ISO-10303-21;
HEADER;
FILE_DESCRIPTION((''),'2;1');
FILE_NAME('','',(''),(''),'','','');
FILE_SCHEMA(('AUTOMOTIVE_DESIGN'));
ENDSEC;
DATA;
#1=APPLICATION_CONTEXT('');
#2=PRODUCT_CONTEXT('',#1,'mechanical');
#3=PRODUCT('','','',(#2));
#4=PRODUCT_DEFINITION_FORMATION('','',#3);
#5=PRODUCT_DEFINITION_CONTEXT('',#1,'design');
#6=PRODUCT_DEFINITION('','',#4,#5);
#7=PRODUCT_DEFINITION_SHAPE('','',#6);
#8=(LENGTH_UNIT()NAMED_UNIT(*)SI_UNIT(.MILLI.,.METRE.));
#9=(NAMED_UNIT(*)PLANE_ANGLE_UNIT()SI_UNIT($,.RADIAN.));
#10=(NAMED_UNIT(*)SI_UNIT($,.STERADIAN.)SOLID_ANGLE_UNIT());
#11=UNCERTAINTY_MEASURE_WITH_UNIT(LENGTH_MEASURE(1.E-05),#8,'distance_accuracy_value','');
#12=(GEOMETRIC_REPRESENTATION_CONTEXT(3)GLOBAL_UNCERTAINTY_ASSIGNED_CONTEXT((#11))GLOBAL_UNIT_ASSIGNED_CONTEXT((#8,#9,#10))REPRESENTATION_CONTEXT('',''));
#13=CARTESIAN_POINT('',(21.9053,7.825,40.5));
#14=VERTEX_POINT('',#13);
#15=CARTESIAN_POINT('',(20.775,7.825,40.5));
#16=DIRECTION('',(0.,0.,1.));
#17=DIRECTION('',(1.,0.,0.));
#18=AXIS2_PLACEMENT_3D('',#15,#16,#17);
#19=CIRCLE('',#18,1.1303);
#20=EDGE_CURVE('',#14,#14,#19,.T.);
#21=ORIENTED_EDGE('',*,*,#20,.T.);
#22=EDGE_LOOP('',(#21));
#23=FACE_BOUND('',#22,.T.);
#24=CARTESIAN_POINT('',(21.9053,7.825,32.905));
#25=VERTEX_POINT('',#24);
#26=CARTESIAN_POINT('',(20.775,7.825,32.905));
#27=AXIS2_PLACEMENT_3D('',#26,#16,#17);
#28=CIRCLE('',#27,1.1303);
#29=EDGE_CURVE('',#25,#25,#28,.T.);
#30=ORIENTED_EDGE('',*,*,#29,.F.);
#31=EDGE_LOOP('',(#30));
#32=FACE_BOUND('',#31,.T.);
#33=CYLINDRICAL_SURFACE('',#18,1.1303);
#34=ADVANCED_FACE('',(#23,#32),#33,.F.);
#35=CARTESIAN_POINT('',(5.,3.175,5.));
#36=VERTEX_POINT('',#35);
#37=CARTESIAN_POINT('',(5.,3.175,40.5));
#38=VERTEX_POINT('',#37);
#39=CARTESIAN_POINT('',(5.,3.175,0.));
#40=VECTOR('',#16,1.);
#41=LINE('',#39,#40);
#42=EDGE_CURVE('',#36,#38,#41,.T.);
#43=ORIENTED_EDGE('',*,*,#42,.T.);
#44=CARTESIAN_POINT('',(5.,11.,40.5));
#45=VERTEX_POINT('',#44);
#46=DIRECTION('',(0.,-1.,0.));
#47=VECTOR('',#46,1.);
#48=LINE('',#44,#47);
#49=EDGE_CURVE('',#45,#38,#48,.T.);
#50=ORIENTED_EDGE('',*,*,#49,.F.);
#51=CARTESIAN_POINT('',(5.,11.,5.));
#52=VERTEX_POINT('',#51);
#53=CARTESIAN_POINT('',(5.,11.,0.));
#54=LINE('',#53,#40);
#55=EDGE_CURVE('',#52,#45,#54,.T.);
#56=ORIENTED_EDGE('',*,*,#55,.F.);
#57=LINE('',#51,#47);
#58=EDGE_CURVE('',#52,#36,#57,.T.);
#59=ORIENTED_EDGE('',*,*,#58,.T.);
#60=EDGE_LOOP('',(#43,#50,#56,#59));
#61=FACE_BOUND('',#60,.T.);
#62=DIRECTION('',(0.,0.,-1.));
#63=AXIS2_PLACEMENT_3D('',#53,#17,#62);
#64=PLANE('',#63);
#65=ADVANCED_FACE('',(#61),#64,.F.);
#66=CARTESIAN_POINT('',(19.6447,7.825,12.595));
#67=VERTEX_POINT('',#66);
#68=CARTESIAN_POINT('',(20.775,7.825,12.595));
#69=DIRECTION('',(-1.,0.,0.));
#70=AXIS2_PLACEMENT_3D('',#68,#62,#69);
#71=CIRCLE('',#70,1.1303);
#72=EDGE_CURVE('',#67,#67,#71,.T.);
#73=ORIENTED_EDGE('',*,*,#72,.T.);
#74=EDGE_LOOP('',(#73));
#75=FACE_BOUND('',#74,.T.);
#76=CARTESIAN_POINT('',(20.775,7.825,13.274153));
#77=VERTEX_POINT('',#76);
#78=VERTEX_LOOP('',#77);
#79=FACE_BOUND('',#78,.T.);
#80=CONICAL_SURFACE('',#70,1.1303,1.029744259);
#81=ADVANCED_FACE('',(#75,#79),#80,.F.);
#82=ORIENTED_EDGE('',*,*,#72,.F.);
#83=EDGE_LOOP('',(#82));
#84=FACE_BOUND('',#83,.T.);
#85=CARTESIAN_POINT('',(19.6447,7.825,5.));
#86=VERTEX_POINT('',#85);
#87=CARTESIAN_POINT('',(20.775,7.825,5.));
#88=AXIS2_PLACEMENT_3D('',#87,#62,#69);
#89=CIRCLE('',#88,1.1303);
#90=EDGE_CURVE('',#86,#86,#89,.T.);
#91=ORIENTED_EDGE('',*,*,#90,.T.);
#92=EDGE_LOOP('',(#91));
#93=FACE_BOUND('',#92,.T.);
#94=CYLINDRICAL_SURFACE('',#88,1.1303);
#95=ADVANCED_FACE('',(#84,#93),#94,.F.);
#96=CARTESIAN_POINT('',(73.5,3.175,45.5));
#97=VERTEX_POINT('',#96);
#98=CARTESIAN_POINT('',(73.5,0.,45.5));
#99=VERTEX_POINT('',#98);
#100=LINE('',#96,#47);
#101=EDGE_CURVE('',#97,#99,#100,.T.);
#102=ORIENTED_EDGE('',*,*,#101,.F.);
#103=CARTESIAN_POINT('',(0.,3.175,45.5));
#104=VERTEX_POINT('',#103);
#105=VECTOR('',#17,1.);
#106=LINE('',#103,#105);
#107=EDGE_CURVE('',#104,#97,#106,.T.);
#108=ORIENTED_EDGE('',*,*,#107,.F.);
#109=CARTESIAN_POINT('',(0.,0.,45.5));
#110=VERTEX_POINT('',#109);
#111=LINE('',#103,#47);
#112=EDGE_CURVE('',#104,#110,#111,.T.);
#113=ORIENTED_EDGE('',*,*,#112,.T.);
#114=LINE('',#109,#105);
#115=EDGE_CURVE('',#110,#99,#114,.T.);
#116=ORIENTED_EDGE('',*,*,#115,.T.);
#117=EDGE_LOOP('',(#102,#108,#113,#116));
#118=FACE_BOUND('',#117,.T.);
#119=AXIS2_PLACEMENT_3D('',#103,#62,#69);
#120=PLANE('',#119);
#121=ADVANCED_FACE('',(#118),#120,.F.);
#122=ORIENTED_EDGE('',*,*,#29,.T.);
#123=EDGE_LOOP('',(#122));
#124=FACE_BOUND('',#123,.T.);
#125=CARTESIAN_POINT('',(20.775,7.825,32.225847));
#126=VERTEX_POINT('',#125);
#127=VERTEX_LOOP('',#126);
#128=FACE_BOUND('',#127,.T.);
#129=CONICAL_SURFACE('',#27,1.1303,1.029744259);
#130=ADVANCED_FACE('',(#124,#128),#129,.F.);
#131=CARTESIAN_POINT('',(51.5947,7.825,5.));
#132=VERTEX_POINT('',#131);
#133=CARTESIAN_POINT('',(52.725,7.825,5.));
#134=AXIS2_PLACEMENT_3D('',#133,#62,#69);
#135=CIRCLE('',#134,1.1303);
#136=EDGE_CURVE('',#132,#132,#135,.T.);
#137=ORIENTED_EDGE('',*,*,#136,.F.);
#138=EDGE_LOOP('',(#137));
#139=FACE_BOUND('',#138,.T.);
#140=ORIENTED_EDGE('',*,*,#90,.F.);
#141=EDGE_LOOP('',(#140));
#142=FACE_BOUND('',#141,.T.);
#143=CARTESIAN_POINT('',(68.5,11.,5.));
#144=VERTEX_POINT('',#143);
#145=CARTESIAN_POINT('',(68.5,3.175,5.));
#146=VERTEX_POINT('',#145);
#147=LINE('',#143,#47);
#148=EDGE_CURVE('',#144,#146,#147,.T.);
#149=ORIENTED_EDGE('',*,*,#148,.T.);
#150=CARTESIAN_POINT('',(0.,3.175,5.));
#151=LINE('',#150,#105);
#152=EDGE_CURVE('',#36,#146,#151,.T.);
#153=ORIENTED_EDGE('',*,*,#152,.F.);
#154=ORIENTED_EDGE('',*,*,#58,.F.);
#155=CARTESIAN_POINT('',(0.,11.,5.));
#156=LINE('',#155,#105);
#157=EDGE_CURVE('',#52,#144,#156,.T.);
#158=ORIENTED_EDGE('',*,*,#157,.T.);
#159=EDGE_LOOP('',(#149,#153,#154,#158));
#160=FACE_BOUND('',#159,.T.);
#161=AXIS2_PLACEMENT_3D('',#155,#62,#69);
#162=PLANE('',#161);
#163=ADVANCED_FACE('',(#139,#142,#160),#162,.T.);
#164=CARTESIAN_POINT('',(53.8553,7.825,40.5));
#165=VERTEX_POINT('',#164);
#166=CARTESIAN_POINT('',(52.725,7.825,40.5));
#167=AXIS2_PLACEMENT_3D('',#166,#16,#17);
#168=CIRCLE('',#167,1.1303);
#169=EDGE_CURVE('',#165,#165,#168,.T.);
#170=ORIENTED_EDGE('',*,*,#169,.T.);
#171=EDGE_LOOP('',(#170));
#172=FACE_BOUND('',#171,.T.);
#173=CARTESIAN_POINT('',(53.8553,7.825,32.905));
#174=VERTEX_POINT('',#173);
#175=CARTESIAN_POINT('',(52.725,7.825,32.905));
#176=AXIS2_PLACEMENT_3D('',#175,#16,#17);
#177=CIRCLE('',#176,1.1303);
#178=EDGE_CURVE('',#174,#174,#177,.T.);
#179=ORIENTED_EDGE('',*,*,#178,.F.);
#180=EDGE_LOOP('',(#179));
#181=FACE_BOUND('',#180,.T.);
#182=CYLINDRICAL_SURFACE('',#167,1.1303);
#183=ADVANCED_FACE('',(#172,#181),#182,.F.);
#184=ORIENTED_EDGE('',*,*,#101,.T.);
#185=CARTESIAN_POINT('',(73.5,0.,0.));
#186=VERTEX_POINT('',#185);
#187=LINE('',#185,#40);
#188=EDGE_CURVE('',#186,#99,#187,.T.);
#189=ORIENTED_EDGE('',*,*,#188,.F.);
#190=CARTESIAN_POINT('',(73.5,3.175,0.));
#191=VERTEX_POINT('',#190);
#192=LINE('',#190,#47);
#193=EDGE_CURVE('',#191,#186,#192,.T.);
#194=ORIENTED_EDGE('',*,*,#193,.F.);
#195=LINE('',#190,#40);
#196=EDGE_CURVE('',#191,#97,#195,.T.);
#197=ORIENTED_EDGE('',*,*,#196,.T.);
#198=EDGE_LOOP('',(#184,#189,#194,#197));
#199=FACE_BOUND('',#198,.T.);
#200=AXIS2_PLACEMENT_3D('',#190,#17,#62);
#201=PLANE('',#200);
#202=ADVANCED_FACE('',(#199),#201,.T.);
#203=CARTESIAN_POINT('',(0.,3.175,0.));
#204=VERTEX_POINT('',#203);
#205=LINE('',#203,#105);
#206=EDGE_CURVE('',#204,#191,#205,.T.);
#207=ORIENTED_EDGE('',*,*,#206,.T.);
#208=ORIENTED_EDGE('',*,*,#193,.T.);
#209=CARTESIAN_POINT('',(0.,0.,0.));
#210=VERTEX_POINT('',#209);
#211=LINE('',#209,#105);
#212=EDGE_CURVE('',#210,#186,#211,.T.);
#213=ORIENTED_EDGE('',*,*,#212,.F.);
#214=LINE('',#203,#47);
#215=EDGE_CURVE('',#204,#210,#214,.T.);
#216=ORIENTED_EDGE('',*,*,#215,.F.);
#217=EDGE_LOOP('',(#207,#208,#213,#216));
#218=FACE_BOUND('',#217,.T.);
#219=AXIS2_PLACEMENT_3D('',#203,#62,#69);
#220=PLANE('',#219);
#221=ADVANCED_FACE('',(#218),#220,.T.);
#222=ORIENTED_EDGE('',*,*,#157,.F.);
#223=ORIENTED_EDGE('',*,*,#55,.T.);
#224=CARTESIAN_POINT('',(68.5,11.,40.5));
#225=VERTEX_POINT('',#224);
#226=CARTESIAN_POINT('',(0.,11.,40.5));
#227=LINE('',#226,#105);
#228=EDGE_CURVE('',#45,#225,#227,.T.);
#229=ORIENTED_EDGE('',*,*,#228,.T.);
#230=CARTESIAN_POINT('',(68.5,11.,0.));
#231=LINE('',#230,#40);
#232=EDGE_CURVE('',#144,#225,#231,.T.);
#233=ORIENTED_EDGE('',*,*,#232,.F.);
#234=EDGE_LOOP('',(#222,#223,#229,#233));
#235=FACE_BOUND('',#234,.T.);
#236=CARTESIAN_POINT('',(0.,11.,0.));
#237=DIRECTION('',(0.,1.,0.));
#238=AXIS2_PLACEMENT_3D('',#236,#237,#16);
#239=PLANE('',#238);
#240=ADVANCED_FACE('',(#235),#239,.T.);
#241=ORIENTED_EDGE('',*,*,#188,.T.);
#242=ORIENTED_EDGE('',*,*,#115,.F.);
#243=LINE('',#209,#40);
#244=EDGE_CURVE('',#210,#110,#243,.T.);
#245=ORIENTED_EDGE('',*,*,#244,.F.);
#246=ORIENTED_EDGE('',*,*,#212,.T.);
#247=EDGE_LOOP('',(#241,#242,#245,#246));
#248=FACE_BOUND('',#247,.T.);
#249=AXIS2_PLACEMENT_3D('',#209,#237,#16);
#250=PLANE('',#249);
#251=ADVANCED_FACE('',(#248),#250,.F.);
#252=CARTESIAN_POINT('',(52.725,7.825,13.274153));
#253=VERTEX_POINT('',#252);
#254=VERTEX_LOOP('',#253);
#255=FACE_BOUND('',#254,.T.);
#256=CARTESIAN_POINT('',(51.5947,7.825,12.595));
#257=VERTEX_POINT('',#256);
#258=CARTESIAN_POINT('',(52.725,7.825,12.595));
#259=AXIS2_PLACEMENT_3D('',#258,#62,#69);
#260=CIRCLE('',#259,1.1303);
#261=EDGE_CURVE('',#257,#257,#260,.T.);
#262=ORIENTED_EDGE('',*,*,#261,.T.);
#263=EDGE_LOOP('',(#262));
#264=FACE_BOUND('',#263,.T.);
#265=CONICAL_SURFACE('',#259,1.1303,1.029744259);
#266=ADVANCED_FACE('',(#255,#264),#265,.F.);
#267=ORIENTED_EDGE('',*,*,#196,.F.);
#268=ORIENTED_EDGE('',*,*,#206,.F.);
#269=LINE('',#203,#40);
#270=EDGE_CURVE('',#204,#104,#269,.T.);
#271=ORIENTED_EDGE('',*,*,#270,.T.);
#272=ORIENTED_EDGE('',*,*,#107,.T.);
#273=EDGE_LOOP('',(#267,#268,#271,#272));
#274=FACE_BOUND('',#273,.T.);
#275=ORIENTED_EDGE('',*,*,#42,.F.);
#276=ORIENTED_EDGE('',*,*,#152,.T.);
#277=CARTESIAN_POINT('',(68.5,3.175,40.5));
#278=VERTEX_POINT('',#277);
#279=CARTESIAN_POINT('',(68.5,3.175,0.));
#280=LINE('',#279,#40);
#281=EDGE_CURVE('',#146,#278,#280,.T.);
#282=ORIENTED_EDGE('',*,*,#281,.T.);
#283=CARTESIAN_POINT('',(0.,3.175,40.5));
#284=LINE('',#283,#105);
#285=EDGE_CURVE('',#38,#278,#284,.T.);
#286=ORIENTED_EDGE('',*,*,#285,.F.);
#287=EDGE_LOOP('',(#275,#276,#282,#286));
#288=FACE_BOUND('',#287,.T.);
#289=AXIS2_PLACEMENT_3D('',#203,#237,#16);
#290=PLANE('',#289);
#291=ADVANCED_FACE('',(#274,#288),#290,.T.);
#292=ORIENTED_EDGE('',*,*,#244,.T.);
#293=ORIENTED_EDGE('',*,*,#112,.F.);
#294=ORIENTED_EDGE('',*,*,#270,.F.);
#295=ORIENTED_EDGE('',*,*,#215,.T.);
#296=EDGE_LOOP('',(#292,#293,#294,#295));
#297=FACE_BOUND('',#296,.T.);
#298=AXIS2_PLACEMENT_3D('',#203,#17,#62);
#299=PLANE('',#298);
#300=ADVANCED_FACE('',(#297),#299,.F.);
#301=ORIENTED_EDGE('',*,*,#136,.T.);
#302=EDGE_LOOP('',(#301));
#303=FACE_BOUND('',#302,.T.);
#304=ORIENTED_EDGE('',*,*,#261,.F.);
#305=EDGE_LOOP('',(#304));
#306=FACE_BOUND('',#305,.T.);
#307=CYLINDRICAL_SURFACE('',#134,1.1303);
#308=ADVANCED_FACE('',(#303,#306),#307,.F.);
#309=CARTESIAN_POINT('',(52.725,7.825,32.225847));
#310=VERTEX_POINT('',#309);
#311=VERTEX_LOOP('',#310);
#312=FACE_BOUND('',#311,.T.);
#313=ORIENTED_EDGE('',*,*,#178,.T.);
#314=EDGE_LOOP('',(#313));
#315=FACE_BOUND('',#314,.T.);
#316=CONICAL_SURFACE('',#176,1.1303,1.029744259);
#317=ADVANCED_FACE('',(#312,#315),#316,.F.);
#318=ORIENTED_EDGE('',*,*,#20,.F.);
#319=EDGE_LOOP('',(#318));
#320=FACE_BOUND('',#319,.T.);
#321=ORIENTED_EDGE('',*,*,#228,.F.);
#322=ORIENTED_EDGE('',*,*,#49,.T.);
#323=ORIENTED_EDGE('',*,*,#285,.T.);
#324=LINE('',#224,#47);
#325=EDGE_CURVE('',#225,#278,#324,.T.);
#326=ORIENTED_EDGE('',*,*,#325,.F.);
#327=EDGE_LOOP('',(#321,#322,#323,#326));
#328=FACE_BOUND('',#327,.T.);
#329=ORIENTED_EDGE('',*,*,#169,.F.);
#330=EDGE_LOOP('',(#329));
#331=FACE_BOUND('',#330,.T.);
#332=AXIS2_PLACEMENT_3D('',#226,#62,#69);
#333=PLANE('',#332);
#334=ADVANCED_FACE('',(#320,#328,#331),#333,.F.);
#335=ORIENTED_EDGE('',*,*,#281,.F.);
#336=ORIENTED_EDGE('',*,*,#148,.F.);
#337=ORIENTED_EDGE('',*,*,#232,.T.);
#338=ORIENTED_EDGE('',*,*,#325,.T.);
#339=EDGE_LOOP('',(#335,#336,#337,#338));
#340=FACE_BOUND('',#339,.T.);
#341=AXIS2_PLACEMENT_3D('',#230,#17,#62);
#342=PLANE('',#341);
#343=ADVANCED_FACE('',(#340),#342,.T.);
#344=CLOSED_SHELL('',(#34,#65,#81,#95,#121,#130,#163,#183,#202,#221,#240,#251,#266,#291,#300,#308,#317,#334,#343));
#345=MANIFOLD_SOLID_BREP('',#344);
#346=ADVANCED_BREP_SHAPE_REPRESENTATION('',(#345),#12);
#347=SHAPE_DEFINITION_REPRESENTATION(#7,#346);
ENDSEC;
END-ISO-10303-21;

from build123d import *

# Parameters (mm, degrees)
MAIN_SKETCH_W                         = 73.5
MAIN_SKETCH_H                         = 45.5
MAIN_SKETCH_W_2                       = 63.5
MAIN_SKETCH_H_2                       = 35.5
LIP_DEPTH                             = 3.175
MOUNTING_BASE_OUTLINE_W               = 63.5
MOUNTING_BASE_OUTLINE_H               = 35.5
MOUNTING_BASE_DEPTH                   = 11
HEATER_CART_4_40_TAPS_D               = 2.2606
HEATER_CART_4_40_TAPS_DEPTH           = 7.595
HEATER_CART_4_40_TAPS_TIP             = 0.679152758
HEATER_CART_4_40_TAPS_ON_FACE_2_D     = 2.2606
HEATER_CART_4_40_TAPS_ON_FACE_2_DEPTH = 7.595
HEATER_CART_4_40_TAPS_ON_FACE_2_TIP   = 0.679152758


# Read off the part's stored shape, not the designer's step: Mounting_Base
with BuildPart() as part:
    # Main_Sketch → Lip (new body)
    with BuildSketch(Plane(origin=(0, 0, 0), x_dir=(1, 0, 0), z_dir=(0, 1, 0))):
        with Locations((36.75, -22.75)):
            Rectangle(MAIN_SKETCH_W, MAIN_SKETCH_H)
        with Locations((36.75, -22.75)):
            Rectangle(MAIN_SKETCH_W_2, MAIN_SKETCH_H_2, mode=Mode.SUBTRACT)
    extrude(amount=LIP_DEPTH)

    # Mounting_Base outline → Mounting_Base (add)
    with BuildSketch(Plane(origin=(0, 0, 0), x_dir=(1, 0, 0), z_dir=(0, 1, 0))):
        with Locations((36.75, -22.75)):
            Rectangle(MOUNTING_BASE_OUTLINE_W, MOUNTING_BASE_OUTLINE_H)
    extrude(amount=MOUNTING_BASE_DEPTH)

    # Heater_Cart_#4-40_Taps
    with Locations(Plane(origin=(52.725, 7.825, 5), x_dir=(-1, 0, 0), z_dir=(0, 0, -1))):
        with Locations((0, 0), (31.95, 0)):
            Hole(HEATER_CART_4_40_TAPS_D / 2, depth=HEATER_CART_4_40_TAPS_DEPTH)
            with Locations((0, 0, -(HEATER_CART_4_40_TAPS_DEPTH + HEATER_CART_4_40_TAPS_TIP / 2))):  # 118° drill point
                Cone(0, HEATER_CART_4_40_TAPS_D / 2, HEATER_CART_4_40_TAPS_TIP, mode=Mode.SUBTRACT)

    # Heater_Cart_#4-40_Taps on face 2
    with Locations(Plane(origin=(20.775, 7.825, 40.5), x_dir=(1, 0, 0), z_dir=(0, 0, 1))):
        with Locations((0, 0), (31.95, 0)):
            Hole(HEATER_CART_4_40_TAPS_ON_FACE_2_D / 2, depth=HEATER_CART_4_40_TAPS_ON_FACE_2_DEPTH)
            with Locations((0, 0, -(HEATER_CART_4_40_TAPS_ON_FACE_2_DEPTH + HEATER_CART_4_40_TAPS_ON_FACE_2_TIP / 2))):  # 118° drill point
                Cone(0, HEATER_CART_4_40_TAPS_ON_FACE_2_D / 2, HEATER_CART_4_40_TAPS_ON_FACE_2_TIP, mode=Mode.SUBTRACT)


solid = part.part
